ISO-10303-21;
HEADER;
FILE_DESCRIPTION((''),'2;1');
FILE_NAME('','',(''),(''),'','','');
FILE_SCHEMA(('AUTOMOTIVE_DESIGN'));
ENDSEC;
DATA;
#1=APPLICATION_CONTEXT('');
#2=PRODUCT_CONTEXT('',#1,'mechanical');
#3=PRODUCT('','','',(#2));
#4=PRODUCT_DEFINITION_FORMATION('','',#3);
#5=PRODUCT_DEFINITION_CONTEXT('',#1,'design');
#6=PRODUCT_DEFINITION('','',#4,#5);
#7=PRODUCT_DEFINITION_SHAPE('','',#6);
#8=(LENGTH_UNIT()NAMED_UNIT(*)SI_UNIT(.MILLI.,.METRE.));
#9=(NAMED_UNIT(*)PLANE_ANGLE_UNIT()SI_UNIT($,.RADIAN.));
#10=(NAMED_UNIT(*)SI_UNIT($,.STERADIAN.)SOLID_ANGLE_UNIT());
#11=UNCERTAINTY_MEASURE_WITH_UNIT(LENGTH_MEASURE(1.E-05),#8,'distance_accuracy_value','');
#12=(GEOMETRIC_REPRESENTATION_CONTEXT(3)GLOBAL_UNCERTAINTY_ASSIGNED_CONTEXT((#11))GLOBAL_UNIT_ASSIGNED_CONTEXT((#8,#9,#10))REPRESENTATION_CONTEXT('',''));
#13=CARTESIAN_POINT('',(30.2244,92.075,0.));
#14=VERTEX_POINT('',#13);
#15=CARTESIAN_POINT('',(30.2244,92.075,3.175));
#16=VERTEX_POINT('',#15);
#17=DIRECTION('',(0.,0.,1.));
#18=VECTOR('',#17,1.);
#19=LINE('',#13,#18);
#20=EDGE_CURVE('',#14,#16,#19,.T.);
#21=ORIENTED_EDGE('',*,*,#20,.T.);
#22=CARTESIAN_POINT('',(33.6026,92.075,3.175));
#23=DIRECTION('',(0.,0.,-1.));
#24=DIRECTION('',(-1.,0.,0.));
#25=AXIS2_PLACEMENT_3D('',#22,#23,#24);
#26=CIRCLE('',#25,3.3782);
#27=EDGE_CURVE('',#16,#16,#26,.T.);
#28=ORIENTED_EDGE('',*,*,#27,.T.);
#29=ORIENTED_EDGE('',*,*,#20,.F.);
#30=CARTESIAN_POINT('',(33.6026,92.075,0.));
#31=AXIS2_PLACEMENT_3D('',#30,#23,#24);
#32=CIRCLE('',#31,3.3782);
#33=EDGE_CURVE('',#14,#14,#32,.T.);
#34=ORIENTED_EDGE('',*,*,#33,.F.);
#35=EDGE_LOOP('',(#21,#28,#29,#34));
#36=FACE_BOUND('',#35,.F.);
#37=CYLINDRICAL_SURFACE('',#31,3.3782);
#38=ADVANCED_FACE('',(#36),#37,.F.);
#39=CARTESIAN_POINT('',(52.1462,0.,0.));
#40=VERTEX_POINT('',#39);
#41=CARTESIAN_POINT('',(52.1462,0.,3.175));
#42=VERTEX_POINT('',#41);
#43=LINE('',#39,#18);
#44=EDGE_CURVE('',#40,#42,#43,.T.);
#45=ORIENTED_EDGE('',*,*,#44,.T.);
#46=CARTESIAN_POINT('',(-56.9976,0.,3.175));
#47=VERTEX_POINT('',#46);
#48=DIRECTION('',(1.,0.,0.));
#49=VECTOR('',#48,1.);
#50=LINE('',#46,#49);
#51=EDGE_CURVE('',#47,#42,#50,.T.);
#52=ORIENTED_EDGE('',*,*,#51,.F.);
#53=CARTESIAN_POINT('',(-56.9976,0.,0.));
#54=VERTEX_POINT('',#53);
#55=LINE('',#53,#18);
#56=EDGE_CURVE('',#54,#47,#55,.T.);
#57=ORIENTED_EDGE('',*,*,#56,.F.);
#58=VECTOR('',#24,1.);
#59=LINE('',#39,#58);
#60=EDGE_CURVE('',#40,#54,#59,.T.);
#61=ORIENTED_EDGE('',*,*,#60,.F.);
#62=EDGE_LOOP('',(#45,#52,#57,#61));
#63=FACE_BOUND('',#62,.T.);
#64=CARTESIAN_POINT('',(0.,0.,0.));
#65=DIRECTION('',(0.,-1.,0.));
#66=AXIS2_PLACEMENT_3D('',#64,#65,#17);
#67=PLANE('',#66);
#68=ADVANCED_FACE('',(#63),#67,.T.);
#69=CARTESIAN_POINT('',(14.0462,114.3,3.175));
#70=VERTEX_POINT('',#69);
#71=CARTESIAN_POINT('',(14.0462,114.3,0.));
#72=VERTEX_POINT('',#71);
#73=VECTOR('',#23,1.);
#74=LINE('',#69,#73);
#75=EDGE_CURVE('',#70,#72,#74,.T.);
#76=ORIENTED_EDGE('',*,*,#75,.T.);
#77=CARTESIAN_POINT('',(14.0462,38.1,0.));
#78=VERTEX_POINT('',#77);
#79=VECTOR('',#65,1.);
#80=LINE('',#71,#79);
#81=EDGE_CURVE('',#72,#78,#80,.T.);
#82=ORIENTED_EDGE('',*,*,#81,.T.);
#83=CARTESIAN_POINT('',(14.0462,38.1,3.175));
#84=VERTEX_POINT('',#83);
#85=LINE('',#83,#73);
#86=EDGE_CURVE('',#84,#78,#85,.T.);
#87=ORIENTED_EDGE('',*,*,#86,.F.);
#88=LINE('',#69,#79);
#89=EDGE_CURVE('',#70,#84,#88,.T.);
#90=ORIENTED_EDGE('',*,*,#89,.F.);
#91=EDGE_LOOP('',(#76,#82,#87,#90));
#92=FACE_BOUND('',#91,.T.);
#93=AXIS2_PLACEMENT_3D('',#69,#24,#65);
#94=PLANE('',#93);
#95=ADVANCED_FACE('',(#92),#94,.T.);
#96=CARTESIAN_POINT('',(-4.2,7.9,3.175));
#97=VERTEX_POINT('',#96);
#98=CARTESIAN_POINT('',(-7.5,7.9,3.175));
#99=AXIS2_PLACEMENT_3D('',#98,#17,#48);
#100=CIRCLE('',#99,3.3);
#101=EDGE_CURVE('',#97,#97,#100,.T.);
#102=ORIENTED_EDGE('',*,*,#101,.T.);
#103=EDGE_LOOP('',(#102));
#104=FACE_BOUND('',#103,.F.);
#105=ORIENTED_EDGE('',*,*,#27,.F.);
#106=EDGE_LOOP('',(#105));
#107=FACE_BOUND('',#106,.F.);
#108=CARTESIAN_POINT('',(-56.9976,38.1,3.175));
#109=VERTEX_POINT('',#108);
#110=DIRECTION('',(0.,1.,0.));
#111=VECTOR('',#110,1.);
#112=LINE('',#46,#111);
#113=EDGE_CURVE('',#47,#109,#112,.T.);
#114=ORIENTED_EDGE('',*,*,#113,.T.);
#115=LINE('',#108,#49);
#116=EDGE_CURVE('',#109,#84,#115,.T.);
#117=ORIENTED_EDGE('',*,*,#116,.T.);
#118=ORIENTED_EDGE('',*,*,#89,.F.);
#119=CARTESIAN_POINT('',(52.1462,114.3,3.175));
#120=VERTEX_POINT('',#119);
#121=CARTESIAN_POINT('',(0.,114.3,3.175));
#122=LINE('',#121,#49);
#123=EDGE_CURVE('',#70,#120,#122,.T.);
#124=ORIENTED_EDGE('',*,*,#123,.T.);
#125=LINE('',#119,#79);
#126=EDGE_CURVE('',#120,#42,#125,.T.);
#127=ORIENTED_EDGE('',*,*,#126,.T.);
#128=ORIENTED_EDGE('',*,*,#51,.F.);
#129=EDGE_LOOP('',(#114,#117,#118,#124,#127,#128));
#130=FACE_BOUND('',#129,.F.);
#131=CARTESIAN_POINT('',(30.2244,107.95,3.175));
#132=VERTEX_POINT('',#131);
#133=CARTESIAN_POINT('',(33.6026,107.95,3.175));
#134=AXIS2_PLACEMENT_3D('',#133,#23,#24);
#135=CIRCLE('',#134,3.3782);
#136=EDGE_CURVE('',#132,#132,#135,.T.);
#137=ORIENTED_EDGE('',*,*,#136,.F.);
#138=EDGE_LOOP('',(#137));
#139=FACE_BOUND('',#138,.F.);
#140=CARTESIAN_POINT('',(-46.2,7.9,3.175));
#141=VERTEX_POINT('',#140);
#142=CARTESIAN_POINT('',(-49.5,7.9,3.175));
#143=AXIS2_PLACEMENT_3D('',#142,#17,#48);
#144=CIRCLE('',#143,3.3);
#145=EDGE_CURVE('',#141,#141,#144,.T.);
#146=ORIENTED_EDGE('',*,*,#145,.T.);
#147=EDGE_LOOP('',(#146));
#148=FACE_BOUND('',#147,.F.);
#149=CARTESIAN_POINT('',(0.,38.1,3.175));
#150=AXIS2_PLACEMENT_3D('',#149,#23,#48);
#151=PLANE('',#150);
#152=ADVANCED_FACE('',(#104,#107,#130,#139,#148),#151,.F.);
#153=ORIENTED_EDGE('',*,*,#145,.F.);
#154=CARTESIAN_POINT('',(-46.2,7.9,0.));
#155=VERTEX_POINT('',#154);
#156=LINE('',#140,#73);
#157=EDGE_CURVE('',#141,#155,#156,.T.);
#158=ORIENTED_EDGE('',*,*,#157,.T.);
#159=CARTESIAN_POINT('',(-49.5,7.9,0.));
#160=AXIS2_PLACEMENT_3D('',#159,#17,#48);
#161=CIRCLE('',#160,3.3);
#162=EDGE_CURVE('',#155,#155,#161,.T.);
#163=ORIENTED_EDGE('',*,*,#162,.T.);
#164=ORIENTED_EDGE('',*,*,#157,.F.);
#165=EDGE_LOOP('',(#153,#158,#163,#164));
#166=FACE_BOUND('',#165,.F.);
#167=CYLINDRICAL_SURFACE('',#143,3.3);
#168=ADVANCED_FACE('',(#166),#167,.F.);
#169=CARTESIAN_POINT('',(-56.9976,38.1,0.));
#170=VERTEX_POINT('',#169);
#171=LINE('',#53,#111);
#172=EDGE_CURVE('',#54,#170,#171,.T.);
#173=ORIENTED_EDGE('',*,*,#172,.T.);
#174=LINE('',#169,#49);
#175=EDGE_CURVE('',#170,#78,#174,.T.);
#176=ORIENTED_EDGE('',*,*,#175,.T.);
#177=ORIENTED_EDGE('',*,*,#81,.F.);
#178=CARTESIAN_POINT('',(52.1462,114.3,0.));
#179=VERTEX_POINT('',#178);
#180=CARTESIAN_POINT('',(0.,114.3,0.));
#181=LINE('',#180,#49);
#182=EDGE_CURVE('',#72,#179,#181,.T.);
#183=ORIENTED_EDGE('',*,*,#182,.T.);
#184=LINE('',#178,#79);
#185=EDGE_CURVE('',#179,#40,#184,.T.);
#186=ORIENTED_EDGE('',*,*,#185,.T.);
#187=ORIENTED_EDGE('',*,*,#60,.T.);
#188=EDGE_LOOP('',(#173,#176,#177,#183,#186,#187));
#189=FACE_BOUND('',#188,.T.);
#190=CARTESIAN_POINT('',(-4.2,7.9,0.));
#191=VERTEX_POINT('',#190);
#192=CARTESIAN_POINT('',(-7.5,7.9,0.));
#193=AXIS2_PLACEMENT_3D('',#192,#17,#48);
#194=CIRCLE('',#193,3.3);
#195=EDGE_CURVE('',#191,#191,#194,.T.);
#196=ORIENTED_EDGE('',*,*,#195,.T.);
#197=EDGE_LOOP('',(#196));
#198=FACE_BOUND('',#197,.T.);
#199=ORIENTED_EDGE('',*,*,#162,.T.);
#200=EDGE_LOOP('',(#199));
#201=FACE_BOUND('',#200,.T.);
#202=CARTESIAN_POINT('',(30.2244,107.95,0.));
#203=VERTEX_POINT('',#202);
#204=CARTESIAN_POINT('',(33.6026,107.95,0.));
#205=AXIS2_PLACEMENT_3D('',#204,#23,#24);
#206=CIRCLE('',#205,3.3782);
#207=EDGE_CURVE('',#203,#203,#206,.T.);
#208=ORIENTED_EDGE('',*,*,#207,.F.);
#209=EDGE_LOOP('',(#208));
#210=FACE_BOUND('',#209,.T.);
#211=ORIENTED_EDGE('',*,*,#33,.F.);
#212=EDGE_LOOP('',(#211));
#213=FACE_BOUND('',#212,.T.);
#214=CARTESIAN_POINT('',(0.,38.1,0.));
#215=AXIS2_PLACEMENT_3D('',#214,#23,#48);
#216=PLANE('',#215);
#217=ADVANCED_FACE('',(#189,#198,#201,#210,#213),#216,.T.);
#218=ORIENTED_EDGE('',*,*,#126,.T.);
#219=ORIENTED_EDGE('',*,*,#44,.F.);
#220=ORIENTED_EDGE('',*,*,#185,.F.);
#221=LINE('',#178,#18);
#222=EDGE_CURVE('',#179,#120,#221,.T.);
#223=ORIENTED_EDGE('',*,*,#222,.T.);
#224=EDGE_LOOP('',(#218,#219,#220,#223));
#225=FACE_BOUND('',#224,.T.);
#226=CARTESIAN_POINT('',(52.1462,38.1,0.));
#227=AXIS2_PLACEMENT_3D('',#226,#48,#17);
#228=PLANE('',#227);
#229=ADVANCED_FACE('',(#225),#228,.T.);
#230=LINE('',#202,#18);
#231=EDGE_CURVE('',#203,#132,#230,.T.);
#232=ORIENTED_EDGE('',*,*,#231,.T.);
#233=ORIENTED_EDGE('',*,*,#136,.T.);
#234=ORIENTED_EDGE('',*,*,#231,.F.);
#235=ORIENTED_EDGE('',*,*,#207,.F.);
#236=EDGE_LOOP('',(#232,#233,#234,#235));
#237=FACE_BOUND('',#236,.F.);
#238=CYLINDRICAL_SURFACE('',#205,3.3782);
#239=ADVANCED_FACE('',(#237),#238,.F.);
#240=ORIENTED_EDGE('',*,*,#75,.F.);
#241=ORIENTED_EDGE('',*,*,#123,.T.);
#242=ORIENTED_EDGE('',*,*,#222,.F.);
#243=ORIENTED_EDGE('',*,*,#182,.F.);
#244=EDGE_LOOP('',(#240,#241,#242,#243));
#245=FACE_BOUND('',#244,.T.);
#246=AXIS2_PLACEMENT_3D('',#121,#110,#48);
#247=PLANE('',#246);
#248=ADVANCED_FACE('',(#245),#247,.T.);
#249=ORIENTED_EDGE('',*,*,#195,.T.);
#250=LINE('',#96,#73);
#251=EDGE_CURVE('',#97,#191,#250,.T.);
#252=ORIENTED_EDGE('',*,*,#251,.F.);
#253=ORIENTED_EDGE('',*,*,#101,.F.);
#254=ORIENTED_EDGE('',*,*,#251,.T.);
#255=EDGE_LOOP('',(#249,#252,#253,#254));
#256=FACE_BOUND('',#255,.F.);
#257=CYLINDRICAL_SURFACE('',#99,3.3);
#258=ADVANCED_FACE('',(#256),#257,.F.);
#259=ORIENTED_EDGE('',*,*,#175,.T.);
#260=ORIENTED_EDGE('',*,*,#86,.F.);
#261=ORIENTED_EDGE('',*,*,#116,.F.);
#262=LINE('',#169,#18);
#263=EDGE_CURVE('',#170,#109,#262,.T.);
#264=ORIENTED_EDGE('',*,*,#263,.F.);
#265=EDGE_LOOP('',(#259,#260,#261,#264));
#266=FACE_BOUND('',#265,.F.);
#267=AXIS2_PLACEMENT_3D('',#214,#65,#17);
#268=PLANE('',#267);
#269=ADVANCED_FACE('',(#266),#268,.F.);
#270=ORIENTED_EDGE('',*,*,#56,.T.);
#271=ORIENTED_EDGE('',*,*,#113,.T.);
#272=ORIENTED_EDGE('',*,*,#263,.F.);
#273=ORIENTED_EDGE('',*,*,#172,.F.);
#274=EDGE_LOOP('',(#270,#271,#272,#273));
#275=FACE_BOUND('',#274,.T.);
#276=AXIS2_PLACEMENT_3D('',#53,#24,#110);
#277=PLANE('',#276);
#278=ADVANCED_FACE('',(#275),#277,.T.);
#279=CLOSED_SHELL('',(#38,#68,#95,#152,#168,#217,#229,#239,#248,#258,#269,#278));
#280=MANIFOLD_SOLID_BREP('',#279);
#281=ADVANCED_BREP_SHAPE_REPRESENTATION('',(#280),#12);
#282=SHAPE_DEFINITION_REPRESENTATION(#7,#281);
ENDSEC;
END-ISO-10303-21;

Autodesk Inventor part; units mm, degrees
ref_plane "YZ Plane" through (0, 0, 0) normal (1, 0, 0) x (0, 1, 0)
ref_plane "XZ Plane" through (0, 0, 0) normal (0, 1, 0) x (-1, 0, 0)
ref_plane "XY Plane" through (0, 0, 0) normal (0, 0, 1) x (1, 0, 0)
sketch "Sketch1" plane through (0, 0, 0) normal (0, 0, 1) x (1, 0, 0)
  line L0 (0, 0) -> (-56.9976, 0)
  line L1 (-56.9976, 0) -> (-56.9976, 38.1)
  line L2 (-56.9976, 38.1) -> (0, 38.1)
  line L3 (0, 38.1) -> (0, 0)
  line L4 (0, 38.1) -> (-7.493, 38.1)
  line L5 (-7.493, 38.1) -> (-7.493, 8.1026)
  line L6 (-56.9976, 38.1) -> (-49.5046, 38.1)
  line L7 (-49.5046, 38.1) -> (-49.5046, 8.1026)
  dimension "d1" = 56.9976
  dimension "d2" = 38.1
  dimension "d3" = 7.493
  dimension "d4" = 29.9974
  dimension "d5" = 7.493
extrude "Plate1" add sketch "Sketch1" along normal blind 3.175
sketch "Sketch8" plane through (0, 0, 3.175) normal (0, 0, 1) x (1, 0, 0)
  circle A0 centre (-7.5, 7.9) radius 3.3 projected
  circle A1 centre (-49.5, 7.9) radius 3.3 projected
extrude "Cut1" cut sketch "Sketch8" against normal blind 3.175
sketch "Sketch10" plane through (0, 0, 3.175) normal (1, 0, 0) x (0, 0, -1)
  line L0 (0, 38.1) -> (0, 0) projected
  line L1 (3.175, 0) -> (0, 0) projected
  line L2 (3.175, 0) -> (3.175, 38.1) projected
  line L3 (3.175, 38.1) -> (0, 38.1) projected
extrude "Extrusion1" add sketch "Sketch10" along normal blind 52.1462
sketch "Sketch13" plane through (0, 38.1, 3.175) normal (0, 1, 0) x (1, 0, 0)
  line L0 (0, 3.175) -> (0, 0) projected
  line L1 (0, 0) -> (52.1462, 0) projected
  line L2 (52.1462, 3.175) -> (52.1462, 0) projected
  line L3 (0, 3.175) -> (52.1462, 3.175) projected
extrude "Extrusion2" add sketch "Sketch13" along normal blind 76.2
sketch "Sketch14" plane through (0, 0, 0) normal (0, 0, -1) x (-1, 0, 0)
  circle A0 centre (-33.6026, 107.95) radius 3.3782 projected
  circle A1 centre (-33.6026, 92.075) radius 3.3782 projected
  point P0 (0, 0)
extrude "Cut4" cut sketch "Sketch14" against normal blind 3.175
sketch "Sketch15" plane through (0, 0, 3.175) normal (0, 0, 1) x (1, 0, 0)
  line L0 (0, 114.3) -> (52.1462, 114.3) projected
  line L1 (0, 38.1) -> (0, 114.3) projected
  line L2 (-56.9976, 38.1) -> (0, 38.1) projected
  line L3 (52.1462, 114.3) -> (14.0462, 114.3)
  line L4 (14.0462, 114.3) -> (14.0462, 38.1)
  line L5 (14.0462, 38.1) -> (0, 38.1)
  point P0 (0, 0)
  dimension "d31" = 38.1
extrude "Cut5" cut sketch "Sketch15" against normal blind 3.175
equation "\"d19\" = Thickness"
equation "\"d29\" = Thickness"
equation "\"d32\" = Thickness"
equation "\"BendRadius\" = Thickness"
equation "\"BendReliefWidth\" = Thickness"
equation "\"BendReliefDepth\" = 0.5 * Thickness"
equation "\"CornerReliefSize\" = 4 * Thickness"
equation "\"MinimumRemnant\" = 2 * Thickness"
equation "\"TransitionRadius\" = BendRadius"
equation "\"JacobiRadiusSize\" = BendRadius"
equation "\"GapSize\" = Thickness"
equation "\"d8\" = BendRadius"
equation "\"Thickness\" = 3.175"
properties part number "M - endstop" material "Aluminum 6061"
